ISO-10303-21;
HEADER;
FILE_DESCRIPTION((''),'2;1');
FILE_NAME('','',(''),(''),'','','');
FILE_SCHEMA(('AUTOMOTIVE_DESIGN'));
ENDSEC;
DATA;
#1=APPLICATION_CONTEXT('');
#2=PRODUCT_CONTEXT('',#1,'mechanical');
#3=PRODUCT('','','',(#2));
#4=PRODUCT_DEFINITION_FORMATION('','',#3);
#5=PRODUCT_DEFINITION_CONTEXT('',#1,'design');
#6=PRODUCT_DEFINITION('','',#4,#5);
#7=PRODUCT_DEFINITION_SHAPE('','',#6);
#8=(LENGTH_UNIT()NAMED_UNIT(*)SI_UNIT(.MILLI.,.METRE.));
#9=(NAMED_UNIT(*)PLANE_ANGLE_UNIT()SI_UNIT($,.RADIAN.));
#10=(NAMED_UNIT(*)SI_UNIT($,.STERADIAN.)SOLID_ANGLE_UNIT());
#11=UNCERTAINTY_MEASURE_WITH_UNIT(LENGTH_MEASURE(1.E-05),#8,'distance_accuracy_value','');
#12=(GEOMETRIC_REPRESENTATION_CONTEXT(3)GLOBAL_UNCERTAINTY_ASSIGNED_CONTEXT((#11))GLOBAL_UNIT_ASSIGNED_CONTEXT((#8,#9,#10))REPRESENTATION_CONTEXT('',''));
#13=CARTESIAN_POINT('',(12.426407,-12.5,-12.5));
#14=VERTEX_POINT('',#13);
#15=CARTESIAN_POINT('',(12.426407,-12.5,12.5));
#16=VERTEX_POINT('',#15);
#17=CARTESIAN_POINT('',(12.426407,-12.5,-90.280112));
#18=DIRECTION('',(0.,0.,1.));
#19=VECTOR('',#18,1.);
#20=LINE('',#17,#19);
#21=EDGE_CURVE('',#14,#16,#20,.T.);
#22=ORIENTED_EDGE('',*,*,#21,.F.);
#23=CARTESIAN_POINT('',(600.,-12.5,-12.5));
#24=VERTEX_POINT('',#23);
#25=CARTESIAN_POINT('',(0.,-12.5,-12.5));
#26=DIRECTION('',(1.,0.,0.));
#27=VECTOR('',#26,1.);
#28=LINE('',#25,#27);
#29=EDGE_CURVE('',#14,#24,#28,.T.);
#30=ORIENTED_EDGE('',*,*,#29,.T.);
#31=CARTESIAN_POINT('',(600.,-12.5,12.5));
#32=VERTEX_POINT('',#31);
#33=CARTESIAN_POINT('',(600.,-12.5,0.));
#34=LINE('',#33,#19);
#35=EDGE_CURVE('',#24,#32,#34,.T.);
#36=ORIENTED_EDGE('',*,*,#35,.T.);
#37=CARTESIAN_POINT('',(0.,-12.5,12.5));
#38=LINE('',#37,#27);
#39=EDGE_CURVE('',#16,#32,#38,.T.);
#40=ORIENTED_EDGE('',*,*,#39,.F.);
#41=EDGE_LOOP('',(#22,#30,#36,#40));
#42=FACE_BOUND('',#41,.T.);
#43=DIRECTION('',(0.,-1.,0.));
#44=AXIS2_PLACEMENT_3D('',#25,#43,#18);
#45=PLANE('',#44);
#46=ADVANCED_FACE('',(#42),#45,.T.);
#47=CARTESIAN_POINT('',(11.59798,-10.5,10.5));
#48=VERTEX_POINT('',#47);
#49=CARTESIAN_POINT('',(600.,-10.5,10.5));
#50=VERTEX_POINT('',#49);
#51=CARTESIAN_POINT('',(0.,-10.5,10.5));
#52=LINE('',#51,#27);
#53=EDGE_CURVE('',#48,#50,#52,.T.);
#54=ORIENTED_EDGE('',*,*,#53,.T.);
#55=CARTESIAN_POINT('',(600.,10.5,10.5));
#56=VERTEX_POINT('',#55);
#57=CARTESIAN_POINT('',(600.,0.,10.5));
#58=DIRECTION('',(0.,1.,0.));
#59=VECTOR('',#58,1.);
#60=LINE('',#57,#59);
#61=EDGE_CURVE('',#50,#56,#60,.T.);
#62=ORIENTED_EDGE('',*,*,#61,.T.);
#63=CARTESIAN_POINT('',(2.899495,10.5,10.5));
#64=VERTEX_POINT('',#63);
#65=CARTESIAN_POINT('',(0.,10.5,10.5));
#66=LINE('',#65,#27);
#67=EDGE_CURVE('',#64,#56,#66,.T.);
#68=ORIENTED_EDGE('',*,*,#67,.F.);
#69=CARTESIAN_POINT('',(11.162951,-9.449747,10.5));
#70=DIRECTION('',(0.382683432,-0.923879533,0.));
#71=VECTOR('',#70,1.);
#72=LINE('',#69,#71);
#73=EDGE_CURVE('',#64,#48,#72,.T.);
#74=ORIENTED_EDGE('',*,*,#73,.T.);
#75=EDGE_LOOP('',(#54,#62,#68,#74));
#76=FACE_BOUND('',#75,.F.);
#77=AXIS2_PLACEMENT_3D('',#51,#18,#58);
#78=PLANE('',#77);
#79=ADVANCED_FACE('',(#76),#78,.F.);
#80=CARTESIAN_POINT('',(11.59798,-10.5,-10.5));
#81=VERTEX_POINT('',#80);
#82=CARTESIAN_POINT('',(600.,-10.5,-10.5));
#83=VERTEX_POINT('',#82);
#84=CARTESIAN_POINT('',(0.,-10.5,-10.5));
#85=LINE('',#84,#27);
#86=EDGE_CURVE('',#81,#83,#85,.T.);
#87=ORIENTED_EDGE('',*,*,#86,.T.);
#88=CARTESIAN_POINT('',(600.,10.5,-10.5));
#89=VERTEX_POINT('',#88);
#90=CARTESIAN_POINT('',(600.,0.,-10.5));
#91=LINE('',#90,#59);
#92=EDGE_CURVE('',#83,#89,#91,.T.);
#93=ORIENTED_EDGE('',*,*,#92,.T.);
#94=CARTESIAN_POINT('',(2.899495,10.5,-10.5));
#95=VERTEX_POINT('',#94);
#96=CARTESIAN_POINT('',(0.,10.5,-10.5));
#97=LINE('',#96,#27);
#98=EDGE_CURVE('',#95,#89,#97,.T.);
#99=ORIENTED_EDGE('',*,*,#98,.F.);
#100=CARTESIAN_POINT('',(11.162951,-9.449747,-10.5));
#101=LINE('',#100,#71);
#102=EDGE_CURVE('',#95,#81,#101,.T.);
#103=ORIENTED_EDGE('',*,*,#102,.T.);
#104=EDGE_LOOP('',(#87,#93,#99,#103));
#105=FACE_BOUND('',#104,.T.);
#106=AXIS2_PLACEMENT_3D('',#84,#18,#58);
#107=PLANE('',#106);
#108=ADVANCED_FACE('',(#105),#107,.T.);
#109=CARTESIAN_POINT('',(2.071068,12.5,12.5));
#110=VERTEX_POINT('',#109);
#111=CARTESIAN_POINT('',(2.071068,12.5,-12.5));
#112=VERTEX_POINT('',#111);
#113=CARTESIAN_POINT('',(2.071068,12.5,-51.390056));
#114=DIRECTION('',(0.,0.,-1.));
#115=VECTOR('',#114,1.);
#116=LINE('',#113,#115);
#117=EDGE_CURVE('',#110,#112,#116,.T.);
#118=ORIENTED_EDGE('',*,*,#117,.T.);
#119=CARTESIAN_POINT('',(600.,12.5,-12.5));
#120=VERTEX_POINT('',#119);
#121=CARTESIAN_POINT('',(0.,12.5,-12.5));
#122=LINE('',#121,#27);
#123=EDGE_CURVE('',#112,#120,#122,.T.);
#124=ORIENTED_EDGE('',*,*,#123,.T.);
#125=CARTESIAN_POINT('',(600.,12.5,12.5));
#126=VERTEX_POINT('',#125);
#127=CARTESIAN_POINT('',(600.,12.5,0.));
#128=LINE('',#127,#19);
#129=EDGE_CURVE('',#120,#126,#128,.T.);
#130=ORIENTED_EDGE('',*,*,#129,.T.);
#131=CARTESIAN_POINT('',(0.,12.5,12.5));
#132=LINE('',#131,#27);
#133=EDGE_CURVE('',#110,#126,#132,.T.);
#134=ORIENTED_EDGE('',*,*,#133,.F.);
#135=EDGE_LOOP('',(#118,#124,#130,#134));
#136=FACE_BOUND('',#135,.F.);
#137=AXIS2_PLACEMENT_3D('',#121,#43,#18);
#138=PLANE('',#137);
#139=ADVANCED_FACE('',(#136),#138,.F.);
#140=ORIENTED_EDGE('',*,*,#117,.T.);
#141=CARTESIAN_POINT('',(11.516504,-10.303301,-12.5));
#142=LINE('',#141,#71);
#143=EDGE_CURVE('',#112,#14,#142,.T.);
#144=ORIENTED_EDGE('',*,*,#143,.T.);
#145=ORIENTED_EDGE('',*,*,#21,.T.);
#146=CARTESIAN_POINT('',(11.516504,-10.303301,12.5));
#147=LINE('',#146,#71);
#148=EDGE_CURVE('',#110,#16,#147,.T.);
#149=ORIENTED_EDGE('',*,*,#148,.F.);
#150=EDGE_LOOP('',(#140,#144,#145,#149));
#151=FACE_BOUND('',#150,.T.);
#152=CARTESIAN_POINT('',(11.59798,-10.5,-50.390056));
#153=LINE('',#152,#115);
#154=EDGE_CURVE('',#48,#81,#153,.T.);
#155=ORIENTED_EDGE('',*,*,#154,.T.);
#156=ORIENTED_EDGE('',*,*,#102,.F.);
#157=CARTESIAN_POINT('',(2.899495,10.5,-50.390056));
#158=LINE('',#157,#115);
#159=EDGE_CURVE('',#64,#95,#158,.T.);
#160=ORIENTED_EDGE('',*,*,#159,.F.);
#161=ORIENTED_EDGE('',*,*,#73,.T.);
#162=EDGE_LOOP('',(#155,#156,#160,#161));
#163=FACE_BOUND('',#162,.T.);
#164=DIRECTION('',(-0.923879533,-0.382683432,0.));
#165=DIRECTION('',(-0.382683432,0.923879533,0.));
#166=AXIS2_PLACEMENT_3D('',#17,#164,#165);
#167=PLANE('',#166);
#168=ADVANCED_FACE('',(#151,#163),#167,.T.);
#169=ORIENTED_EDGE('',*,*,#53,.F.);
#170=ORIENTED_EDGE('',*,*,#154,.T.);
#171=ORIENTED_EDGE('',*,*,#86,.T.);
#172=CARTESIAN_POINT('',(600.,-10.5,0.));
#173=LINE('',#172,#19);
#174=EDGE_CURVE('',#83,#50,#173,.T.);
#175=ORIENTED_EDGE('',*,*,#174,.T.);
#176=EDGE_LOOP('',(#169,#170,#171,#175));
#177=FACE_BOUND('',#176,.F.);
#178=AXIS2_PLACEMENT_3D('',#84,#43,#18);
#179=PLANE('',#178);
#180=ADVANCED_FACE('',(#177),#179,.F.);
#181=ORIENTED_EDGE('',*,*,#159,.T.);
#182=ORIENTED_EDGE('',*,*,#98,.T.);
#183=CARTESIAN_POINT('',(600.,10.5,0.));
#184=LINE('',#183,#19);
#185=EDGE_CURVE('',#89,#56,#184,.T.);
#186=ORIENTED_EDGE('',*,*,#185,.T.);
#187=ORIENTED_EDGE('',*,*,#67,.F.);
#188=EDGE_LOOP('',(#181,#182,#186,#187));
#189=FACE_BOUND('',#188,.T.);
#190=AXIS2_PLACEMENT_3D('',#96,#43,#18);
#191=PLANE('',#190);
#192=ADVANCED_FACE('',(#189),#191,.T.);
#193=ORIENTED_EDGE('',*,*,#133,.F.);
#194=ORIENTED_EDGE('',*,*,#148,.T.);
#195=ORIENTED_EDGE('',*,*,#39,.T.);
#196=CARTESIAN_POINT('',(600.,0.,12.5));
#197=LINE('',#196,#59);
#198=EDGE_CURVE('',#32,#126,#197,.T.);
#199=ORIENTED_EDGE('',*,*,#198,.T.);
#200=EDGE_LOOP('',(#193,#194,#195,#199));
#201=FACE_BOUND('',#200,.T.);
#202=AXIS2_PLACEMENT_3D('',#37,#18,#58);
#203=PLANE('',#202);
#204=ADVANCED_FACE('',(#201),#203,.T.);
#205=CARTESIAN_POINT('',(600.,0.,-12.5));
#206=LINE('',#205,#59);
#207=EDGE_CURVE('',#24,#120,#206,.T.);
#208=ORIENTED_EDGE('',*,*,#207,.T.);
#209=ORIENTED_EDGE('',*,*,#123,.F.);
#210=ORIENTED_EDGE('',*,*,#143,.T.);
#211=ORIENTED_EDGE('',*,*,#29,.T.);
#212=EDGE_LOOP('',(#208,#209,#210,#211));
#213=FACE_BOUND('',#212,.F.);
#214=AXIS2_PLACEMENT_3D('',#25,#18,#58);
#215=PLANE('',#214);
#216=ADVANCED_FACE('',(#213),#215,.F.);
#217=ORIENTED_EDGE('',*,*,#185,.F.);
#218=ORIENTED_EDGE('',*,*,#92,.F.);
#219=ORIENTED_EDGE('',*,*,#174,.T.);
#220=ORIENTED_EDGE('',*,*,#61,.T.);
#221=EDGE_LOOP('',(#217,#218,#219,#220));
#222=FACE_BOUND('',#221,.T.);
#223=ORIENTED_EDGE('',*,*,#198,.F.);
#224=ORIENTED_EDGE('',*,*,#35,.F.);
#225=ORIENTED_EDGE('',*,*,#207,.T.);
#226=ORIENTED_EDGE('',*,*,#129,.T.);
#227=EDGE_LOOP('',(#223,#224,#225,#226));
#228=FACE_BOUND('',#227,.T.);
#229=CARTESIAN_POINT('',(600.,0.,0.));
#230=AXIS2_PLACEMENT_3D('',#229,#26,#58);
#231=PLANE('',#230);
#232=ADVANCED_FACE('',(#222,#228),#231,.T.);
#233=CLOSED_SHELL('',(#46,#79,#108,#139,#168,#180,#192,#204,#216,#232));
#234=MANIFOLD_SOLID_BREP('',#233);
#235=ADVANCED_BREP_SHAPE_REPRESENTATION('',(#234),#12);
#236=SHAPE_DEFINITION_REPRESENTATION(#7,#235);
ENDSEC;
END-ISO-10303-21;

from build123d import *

# Parameters (mm, degrees)
F0_W        = 25
F0_H        = 25
F0_W_2      = 21
F0_H_2      = 21
F1_DEPTH    = 600
F2_T1_DEPTH = 180.5602235744


# Not quite as in the source:
# - a fillet or chamfer that OpenCascade refuses, or shapes differently, is made with other operations: its cross-section is extruded or revolved along the edge and cut away or added


with BuildPart() as f1:
    # F0 (on Right) → F1 (new body)
    with BuildSketch(Plane.YZ):
        Rectangle(F0_W, F0_H)
        Rectangle(F0_W_2, F0_H_2, mode=Mode.SUBTRACT)
    extrude(amount=F1_DEPTH)

    # F2: chamfer of 30 x 12.4264068712 on 1 edges, made by hand

    # F2_s2 → F2_t1 (cut)
    with BuildSketch(Plane.XY.offset(-90.2801117872)):
        Polygon((12.4264068712, -12.5), (0, 17.5), (0, -12.5), align=None)
    extrude(amount=F2_T1_DEPTH, mode=Mode.SUBTRACT)


solid = f1.part
